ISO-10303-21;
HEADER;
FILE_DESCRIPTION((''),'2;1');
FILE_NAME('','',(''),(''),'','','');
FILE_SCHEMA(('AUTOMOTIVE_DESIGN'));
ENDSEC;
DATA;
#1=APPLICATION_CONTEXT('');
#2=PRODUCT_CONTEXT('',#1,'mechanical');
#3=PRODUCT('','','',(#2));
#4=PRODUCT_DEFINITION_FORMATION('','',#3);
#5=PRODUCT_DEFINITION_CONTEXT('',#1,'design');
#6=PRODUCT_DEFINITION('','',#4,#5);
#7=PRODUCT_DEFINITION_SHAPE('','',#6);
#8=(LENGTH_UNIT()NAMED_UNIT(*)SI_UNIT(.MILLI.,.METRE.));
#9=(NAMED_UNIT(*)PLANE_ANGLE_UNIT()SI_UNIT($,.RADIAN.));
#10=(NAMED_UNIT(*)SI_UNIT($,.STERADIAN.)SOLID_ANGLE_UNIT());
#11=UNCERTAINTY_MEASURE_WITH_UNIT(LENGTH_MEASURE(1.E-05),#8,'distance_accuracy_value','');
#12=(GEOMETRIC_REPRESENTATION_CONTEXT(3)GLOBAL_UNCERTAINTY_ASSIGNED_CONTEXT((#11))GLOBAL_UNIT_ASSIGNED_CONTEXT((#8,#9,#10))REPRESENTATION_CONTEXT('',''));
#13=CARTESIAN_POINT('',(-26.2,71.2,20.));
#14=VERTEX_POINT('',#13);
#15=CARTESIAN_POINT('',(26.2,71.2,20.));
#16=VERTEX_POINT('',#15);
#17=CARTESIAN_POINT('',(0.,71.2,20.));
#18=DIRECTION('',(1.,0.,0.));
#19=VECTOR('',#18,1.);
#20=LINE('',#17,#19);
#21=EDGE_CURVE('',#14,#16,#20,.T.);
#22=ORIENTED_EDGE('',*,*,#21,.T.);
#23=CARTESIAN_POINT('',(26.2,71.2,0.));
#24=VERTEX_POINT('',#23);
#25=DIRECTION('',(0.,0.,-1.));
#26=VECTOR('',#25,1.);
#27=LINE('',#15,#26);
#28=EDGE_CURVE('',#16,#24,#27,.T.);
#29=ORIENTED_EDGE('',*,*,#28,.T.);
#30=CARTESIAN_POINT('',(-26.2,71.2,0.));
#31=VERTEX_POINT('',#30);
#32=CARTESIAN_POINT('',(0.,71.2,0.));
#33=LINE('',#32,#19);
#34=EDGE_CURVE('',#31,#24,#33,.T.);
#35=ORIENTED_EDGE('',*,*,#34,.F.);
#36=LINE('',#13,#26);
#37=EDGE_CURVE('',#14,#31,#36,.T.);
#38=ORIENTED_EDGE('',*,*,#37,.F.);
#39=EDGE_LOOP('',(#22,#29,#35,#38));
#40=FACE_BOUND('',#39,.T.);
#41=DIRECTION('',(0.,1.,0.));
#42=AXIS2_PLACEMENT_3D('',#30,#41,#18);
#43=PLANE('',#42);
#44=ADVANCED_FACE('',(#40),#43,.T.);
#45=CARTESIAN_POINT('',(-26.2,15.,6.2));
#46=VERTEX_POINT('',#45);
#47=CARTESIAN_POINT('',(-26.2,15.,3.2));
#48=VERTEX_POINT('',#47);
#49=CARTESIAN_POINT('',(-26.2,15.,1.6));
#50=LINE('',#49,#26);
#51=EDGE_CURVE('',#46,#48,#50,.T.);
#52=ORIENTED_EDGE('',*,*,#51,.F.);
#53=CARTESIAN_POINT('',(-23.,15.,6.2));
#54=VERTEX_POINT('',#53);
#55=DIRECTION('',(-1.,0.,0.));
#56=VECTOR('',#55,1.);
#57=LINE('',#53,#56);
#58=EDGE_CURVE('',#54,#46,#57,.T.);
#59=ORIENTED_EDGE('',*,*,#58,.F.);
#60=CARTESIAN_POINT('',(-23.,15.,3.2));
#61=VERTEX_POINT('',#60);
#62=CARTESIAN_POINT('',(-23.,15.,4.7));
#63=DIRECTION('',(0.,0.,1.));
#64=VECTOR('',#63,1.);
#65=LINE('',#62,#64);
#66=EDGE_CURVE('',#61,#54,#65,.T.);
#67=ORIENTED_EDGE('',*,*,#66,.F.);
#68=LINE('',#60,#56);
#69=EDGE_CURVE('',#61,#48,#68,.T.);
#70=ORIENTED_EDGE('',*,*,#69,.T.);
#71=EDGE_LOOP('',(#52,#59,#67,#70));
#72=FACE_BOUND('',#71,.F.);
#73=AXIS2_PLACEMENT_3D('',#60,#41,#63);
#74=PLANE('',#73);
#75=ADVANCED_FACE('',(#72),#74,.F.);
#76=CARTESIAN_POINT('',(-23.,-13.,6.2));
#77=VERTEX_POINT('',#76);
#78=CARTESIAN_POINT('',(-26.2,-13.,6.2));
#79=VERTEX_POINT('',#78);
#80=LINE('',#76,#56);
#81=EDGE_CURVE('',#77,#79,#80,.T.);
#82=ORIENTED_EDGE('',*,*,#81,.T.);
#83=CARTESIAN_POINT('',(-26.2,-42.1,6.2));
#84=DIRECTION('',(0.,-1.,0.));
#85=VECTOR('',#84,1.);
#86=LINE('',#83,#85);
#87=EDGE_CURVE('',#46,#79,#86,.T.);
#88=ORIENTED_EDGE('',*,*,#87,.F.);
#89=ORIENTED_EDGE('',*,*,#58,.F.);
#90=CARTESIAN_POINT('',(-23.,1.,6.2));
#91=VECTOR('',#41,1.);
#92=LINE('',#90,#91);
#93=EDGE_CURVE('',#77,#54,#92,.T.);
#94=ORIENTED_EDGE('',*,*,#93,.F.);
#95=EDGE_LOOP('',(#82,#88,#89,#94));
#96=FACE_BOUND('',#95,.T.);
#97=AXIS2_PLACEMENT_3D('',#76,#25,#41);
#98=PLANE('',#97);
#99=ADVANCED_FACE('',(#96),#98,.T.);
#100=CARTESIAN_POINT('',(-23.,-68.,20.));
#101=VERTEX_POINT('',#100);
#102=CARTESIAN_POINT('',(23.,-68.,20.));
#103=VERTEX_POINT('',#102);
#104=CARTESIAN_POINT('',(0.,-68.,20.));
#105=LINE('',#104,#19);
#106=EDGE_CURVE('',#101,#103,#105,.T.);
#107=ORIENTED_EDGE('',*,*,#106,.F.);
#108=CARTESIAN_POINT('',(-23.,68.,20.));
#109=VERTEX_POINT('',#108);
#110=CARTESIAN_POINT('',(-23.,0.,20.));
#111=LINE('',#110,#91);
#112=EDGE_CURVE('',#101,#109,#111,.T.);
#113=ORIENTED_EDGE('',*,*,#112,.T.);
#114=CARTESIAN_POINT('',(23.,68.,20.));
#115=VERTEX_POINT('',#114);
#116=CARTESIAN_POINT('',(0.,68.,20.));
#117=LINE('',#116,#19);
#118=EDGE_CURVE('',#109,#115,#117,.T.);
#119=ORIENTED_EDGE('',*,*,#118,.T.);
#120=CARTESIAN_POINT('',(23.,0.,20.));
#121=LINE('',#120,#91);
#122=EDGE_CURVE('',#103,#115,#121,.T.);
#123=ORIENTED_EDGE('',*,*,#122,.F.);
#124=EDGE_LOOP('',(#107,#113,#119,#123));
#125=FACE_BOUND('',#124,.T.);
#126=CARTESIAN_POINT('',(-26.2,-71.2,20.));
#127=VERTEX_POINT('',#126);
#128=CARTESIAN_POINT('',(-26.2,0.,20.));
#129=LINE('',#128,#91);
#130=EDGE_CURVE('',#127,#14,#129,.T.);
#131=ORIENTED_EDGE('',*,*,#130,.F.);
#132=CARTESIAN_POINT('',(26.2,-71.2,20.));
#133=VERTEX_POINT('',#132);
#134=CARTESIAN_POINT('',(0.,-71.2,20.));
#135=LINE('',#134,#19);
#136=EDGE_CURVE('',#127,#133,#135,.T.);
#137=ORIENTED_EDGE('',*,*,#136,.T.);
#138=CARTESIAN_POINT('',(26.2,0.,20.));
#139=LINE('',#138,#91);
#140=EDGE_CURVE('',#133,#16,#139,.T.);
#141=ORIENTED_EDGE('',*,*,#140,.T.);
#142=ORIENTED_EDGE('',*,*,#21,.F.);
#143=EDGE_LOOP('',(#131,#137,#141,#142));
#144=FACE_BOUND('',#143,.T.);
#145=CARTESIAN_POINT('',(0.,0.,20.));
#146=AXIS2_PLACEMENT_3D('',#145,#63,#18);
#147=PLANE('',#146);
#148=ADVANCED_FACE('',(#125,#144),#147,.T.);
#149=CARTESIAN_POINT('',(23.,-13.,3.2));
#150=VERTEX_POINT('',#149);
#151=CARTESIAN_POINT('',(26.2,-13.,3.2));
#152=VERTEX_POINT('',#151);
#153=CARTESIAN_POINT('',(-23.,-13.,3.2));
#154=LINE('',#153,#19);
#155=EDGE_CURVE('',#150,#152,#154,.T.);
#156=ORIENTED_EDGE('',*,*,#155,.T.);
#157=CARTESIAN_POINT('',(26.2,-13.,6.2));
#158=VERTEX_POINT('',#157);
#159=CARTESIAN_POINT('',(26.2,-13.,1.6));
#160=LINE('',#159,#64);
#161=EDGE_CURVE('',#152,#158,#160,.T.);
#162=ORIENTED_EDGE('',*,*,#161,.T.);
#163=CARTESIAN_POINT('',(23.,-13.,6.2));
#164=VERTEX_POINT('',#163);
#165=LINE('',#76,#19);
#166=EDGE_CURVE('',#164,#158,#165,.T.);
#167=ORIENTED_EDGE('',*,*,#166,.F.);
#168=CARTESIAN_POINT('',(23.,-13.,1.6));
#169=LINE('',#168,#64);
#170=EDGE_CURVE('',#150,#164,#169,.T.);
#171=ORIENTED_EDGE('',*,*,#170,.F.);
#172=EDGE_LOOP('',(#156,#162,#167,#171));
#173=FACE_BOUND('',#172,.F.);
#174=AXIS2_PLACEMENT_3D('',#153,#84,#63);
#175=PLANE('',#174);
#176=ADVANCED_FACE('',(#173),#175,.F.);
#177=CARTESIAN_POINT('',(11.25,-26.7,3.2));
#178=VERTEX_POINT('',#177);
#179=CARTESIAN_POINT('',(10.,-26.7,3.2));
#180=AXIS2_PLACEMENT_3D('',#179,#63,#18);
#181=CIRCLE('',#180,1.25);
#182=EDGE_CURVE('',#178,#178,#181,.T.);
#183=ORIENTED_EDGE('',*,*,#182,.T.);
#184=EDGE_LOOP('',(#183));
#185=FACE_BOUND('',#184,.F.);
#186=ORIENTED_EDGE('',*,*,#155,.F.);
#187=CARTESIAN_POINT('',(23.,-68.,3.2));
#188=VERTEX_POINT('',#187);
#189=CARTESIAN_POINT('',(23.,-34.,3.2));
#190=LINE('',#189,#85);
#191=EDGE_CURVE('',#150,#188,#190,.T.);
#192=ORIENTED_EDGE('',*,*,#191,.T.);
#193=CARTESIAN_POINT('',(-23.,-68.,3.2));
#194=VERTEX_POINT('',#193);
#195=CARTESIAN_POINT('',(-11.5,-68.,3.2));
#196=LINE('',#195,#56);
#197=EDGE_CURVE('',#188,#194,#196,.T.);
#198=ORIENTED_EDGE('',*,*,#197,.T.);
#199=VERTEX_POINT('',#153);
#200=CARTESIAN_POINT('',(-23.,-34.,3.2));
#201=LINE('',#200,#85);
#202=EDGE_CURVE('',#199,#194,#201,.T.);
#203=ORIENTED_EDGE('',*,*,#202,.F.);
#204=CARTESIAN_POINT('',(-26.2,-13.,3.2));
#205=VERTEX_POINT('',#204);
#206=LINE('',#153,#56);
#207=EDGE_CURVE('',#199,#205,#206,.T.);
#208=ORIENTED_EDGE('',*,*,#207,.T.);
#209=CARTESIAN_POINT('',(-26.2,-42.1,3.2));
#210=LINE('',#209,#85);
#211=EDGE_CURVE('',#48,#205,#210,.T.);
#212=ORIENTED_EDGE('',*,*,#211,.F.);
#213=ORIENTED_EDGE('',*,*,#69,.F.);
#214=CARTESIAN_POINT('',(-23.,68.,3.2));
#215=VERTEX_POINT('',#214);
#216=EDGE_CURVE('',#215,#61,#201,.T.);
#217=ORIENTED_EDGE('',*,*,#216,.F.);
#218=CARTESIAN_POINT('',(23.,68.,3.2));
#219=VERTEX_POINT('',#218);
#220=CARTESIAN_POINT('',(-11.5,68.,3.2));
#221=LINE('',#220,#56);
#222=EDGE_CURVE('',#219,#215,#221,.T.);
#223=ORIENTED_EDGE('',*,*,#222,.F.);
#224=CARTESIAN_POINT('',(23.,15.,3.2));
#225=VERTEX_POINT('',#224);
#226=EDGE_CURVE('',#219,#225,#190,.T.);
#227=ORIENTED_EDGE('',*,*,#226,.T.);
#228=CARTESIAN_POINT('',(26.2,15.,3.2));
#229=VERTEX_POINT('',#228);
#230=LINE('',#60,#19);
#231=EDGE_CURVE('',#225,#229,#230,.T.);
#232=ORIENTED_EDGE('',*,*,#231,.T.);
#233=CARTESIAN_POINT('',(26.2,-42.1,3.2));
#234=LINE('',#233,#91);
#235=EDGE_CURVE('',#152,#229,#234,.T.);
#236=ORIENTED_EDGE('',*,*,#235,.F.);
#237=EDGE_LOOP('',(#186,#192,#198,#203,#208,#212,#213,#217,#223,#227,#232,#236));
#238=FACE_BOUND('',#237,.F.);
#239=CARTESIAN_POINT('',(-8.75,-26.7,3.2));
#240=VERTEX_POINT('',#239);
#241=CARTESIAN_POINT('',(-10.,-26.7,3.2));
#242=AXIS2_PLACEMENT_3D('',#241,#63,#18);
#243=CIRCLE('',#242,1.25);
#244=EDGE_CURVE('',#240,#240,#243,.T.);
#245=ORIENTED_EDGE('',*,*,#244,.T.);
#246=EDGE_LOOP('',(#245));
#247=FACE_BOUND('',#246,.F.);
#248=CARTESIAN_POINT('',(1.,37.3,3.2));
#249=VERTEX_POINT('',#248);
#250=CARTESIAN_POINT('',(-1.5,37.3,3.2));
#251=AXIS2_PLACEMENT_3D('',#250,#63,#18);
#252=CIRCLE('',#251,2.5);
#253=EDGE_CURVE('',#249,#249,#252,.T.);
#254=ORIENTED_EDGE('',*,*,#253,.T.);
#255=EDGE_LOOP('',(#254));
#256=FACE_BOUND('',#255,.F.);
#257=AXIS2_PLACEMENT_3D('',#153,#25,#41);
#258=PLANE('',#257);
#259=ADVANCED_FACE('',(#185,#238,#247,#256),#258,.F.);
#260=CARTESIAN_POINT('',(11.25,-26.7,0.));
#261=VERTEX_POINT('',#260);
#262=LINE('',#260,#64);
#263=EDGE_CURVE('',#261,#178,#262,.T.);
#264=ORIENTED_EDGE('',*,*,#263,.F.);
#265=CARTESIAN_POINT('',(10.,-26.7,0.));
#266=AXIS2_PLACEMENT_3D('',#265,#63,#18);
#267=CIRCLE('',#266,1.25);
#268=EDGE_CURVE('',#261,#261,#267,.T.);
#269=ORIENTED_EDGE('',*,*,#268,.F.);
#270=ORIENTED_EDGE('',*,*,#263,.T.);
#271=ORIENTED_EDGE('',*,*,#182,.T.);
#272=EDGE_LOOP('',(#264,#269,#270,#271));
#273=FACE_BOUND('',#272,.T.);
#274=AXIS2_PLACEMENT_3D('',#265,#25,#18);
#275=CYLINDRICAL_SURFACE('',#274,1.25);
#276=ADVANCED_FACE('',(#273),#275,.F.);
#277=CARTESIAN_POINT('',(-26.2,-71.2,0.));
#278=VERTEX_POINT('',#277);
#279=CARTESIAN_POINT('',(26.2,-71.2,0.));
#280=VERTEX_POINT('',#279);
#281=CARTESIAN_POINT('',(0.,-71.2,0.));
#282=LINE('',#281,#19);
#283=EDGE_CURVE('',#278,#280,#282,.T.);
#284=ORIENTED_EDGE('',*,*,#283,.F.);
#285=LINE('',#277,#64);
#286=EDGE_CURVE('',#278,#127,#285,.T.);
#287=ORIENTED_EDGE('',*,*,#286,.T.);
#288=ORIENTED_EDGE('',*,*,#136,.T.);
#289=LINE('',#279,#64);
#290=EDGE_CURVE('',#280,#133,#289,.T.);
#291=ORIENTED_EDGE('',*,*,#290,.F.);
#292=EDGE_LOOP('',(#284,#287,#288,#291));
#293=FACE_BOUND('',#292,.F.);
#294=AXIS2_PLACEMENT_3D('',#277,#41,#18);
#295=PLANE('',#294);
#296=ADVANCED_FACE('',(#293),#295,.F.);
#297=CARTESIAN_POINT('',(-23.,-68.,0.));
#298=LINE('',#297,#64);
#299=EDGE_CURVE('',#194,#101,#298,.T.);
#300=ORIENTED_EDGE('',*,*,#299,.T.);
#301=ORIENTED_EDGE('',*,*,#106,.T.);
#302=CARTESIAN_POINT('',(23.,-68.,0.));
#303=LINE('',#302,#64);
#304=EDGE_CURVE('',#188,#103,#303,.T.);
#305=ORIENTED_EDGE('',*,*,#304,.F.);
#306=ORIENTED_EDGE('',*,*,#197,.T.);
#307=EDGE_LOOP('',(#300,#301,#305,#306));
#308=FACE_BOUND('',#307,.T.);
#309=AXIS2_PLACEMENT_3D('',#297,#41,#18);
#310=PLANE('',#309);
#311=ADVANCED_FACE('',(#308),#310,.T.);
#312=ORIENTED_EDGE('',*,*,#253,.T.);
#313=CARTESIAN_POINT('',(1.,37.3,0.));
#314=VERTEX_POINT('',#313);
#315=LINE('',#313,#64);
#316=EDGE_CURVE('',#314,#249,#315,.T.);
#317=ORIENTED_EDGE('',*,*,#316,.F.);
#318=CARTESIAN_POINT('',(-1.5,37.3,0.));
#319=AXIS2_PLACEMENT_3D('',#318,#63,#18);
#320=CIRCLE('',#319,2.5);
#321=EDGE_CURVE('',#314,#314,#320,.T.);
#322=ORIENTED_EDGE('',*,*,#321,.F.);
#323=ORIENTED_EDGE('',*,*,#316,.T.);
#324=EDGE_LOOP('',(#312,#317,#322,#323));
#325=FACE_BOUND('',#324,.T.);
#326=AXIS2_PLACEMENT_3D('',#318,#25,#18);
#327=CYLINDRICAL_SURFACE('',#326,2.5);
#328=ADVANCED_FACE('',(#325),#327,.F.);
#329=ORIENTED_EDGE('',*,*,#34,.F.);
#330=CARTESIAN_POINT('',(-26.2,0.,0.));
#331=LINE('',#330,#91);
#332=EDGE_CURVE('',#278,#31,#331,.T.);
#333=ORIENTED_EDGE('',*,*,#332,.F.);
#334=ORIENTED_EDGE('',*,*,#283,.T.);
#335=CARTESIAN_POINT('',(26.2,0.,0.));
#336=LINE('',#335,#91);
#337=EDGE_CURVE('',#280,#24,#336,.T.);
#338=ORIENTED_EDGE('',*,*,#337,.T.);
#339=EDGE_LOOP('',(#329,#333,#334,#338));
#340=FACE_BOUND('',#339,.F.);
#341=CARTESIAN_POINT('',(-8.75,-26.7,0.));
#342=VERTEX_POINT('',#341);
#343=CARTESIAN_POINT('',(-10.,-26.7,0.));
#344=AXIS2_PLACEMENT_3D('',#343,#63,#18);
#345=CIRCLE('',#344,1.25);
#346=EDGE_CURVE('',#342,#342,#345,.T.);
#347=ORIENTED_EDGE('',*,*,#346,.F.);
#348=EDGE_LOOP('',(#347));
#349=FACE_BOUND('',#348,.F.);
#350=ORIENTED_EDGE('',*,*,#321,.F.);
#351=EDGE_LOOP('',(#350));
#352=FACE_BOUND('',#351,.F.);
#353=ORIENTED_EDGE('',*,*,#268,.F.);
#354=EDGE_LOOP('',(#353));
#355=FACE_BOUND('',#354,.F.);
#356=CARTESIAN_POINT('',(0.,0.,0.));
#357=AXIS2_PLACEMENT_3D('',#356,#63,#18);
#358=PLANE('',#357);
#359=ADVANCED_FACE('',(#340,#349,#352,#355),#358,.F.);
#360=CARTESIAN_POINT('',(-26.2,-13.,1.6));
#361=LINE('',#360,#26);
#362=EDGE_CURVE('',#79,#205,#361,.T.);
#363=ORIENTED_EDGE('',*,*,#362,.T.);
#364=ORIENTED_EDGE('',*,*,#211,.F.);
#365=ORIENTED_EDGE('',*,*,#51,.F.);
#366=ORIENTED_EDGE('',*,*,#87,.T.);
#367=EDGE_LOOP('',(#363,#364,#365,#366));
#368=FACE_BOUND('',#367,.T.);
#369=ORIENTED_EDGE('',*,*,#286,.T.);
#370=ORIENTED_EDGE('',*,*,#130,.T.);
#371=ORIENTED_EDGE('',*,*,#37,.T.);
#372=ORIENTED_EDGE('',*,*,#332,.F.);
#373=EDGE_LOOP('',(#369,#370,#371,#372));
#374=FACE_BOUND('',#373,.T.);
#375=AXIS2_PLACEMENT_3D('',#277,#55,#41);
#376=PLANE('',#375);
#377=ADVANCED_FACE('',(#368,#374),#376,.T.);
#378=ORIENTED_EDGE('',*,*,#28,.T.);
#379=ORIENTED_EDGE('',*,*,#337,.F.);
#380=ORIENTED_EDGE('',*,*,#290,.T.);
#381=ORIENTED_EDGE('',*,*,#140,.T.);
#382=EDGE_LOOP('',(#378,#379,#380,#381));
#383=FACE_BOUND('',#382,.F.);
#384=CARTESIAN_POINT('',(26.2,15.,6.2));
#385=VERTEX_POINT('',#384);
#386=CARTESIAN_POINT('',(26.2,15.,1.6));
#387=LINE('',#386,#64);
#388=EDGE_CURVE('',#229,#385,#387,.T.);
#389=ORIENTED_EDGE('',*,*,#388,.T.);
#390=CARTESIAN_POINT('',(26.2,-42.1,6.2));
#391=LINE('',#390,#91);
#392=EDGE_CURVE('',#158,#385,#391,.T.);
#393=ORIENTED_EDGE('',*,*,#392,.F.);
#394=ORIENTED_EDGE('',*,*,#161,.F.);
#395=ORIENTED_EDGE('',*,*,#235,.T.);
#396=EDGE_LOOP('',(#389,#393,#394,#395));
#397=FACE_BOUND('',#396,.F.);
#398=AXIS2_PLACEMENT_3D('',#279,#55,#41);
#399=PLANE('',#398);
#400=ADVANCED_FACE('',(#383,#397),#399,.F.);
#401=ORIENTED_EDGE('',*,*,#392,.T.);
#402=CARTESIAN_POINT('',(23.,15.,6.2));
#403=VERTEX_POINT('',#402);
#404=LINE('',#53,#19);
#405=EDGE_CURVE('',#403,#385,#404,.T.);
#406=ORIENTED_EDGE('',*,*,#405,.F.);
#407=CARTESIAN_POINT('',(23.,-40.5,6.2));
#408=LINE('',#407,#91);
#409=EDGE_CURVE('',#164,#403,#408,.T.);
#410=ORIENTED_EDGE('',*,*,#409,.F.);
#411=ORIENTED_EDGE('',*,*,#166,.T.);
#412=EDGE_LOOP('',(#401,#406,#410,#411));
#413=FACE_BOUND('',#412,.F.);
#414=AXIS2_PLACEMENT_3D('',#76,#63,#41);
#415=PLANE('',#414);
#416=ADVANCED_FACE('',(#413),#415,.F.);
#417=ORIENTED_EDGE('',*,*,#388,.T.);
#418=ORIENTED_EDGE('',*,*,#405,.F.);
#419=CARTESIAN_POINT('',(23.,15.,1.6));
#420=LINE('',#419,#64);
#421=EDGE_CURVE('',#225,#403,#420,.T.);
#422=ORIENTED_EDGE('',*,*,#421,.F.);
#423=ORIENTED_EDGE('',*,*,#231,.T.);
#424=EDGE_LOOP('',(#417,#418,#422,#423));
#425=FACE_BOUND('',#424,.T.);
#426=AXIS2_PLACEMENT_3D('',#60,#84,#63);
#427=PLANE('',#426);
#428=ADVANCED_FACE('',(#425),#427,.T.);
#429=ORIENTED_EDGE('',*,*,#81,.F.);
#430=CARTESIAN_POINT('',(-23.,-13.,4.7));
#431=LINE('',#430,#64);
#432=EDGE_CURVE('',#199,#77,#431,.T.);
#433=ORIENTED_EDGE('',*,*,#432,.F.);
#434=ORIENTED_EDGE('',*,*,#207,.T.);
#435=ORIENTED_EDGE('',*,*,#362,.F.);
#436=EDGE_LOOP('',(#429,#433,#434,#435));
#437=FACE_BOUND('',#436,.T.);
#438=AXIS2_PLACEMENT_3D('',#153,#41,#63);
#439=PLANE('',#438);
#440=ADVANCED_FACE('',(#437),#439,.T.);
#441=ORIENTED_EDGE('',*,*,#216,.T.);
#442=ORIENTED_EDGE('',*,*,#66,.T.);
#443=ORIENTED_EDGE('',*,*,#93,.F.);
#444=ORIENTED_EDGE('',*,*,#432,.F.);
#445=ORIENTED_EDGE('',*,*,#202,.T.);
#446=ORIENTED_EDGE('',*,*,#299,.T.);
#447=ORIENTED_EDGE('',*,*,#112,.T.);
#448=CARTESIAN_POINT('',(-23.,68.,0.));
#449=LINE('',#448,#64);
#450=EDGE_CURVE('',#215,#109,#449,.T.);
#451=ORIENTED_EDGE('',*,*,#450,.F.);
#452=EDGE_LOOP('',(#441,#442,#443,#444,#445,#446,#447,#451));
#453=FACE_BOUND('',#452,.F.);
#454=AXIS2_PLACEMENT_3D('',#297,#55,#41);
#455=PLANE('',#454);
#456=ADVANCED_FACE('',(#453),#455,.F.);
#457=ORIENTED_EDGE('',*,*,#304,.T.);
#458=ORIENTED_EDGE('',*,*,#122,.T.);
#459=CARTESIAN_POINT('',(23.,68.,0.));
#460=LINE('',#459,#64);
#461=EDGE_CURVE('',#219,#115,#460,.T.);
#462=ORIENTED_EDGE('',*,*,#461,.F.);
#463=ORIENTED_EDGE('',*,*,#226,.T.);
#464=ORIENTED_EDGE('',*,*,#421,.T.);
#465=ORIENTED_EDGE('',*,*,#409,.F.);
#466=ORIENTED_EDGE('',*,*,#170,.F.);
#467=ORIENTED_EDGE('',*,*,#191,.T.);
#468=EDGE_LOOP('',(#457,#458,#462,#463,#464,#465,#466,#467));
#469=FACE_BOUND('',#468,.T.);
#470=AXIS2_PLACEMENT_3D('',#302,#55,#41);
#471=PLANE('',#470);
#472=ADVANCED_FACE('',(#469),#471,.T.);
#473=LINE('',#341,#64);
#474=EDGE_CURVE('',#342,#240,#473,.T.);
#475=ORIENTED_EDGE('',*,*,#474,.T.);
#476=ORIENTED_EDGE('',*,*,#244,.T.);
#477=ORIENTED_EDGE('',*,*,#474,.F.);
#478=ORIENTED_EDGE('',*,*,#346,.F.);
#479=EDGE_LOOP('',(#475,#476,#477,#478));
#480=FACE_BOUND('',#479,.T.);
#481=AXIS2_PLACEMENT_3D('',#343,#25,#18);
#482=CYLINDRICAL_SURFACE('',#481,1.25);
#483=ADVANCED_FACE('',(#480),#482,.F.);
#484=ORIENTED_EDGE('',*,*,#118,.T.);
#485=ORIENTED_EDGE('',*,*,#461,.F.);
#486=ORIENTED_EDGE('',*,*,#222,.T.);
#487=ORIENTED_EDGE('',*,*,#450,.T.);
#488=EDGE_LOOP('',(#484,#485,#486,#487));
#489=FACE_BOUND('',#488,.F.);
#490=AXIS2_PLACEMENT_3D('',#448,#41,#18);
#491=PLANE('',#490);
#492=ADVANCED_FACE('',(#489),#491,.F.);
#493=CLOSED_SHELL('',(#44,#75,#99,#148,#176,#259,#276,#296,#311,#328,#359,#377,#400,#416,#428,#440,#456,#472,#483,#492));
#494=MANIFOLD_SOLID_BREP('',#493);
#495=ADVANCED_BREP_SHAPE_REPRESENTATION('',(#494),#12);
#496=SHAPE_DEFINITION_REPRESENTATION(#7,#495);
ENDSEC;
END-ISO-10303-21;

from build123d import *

# Parameters (mm, degrees)
F0_W          = 52.4
F0_H          = 142.4
F0_W_2        = 46
F0_H_2        = 136
F0_R          = 1.25
F0_R_2        = 2.5
F1_DEPTH      = 3.2
F2_DEPTH      = 20
F3_W          = 28
F3_H          = 3
F4_DEPTH      = 3.201
F4_DEPTH_BACK = 49.201


with BuildPart() as f1:
    # F0 (on Top) → F1 (new body)
    with BuildSketch(Plane.XY):
        Rectangle(F0_W, F0_H)
        Rectangle(F0_W_2, F0_H_2, mode=Mode.SUBTRACT)
        Rectangle(F0_W_2, F0_H_2)
        with Locations((-10, -26.7)):
            Circle(F0_R, mode=Mode.SUBTRACT)
        with Locations((10, -26.7)):
            Circle(F0_R, mode=Mode.SUBTRACT)
        with Locations((-1.5, 37.3)):
            Circle(F0_R_2, mode=Mode.SUBTRACT)
    extrude(amount=F1_DEPTH)

    # F0 (on Top) → F2 (join)
    with BuildSketch(Plane.XY):
        Rectangle(F0_W, F0_H)
        Rectangle(F0_W_2, F0_H_2, mode=Mode.SUBTRACT)
    extrude(amount=F2_DEPTH)

    # F3 (on face) → F4 (cut, two sides)
    with BuildSketch(Plane.YZ.offset(-23)) as f4_sk:
        with Locations((1, 4.7)):
            Rectangle(F3_W, F3_H)
    extrude(amount=-F4_DEPTH, mode=Mode.SUBTRACT)
    extrude(f4_sk.sketch, amount=F4_DEPTH_BACK, mode=Mode.SUBTRACT)


solid = f1.part
